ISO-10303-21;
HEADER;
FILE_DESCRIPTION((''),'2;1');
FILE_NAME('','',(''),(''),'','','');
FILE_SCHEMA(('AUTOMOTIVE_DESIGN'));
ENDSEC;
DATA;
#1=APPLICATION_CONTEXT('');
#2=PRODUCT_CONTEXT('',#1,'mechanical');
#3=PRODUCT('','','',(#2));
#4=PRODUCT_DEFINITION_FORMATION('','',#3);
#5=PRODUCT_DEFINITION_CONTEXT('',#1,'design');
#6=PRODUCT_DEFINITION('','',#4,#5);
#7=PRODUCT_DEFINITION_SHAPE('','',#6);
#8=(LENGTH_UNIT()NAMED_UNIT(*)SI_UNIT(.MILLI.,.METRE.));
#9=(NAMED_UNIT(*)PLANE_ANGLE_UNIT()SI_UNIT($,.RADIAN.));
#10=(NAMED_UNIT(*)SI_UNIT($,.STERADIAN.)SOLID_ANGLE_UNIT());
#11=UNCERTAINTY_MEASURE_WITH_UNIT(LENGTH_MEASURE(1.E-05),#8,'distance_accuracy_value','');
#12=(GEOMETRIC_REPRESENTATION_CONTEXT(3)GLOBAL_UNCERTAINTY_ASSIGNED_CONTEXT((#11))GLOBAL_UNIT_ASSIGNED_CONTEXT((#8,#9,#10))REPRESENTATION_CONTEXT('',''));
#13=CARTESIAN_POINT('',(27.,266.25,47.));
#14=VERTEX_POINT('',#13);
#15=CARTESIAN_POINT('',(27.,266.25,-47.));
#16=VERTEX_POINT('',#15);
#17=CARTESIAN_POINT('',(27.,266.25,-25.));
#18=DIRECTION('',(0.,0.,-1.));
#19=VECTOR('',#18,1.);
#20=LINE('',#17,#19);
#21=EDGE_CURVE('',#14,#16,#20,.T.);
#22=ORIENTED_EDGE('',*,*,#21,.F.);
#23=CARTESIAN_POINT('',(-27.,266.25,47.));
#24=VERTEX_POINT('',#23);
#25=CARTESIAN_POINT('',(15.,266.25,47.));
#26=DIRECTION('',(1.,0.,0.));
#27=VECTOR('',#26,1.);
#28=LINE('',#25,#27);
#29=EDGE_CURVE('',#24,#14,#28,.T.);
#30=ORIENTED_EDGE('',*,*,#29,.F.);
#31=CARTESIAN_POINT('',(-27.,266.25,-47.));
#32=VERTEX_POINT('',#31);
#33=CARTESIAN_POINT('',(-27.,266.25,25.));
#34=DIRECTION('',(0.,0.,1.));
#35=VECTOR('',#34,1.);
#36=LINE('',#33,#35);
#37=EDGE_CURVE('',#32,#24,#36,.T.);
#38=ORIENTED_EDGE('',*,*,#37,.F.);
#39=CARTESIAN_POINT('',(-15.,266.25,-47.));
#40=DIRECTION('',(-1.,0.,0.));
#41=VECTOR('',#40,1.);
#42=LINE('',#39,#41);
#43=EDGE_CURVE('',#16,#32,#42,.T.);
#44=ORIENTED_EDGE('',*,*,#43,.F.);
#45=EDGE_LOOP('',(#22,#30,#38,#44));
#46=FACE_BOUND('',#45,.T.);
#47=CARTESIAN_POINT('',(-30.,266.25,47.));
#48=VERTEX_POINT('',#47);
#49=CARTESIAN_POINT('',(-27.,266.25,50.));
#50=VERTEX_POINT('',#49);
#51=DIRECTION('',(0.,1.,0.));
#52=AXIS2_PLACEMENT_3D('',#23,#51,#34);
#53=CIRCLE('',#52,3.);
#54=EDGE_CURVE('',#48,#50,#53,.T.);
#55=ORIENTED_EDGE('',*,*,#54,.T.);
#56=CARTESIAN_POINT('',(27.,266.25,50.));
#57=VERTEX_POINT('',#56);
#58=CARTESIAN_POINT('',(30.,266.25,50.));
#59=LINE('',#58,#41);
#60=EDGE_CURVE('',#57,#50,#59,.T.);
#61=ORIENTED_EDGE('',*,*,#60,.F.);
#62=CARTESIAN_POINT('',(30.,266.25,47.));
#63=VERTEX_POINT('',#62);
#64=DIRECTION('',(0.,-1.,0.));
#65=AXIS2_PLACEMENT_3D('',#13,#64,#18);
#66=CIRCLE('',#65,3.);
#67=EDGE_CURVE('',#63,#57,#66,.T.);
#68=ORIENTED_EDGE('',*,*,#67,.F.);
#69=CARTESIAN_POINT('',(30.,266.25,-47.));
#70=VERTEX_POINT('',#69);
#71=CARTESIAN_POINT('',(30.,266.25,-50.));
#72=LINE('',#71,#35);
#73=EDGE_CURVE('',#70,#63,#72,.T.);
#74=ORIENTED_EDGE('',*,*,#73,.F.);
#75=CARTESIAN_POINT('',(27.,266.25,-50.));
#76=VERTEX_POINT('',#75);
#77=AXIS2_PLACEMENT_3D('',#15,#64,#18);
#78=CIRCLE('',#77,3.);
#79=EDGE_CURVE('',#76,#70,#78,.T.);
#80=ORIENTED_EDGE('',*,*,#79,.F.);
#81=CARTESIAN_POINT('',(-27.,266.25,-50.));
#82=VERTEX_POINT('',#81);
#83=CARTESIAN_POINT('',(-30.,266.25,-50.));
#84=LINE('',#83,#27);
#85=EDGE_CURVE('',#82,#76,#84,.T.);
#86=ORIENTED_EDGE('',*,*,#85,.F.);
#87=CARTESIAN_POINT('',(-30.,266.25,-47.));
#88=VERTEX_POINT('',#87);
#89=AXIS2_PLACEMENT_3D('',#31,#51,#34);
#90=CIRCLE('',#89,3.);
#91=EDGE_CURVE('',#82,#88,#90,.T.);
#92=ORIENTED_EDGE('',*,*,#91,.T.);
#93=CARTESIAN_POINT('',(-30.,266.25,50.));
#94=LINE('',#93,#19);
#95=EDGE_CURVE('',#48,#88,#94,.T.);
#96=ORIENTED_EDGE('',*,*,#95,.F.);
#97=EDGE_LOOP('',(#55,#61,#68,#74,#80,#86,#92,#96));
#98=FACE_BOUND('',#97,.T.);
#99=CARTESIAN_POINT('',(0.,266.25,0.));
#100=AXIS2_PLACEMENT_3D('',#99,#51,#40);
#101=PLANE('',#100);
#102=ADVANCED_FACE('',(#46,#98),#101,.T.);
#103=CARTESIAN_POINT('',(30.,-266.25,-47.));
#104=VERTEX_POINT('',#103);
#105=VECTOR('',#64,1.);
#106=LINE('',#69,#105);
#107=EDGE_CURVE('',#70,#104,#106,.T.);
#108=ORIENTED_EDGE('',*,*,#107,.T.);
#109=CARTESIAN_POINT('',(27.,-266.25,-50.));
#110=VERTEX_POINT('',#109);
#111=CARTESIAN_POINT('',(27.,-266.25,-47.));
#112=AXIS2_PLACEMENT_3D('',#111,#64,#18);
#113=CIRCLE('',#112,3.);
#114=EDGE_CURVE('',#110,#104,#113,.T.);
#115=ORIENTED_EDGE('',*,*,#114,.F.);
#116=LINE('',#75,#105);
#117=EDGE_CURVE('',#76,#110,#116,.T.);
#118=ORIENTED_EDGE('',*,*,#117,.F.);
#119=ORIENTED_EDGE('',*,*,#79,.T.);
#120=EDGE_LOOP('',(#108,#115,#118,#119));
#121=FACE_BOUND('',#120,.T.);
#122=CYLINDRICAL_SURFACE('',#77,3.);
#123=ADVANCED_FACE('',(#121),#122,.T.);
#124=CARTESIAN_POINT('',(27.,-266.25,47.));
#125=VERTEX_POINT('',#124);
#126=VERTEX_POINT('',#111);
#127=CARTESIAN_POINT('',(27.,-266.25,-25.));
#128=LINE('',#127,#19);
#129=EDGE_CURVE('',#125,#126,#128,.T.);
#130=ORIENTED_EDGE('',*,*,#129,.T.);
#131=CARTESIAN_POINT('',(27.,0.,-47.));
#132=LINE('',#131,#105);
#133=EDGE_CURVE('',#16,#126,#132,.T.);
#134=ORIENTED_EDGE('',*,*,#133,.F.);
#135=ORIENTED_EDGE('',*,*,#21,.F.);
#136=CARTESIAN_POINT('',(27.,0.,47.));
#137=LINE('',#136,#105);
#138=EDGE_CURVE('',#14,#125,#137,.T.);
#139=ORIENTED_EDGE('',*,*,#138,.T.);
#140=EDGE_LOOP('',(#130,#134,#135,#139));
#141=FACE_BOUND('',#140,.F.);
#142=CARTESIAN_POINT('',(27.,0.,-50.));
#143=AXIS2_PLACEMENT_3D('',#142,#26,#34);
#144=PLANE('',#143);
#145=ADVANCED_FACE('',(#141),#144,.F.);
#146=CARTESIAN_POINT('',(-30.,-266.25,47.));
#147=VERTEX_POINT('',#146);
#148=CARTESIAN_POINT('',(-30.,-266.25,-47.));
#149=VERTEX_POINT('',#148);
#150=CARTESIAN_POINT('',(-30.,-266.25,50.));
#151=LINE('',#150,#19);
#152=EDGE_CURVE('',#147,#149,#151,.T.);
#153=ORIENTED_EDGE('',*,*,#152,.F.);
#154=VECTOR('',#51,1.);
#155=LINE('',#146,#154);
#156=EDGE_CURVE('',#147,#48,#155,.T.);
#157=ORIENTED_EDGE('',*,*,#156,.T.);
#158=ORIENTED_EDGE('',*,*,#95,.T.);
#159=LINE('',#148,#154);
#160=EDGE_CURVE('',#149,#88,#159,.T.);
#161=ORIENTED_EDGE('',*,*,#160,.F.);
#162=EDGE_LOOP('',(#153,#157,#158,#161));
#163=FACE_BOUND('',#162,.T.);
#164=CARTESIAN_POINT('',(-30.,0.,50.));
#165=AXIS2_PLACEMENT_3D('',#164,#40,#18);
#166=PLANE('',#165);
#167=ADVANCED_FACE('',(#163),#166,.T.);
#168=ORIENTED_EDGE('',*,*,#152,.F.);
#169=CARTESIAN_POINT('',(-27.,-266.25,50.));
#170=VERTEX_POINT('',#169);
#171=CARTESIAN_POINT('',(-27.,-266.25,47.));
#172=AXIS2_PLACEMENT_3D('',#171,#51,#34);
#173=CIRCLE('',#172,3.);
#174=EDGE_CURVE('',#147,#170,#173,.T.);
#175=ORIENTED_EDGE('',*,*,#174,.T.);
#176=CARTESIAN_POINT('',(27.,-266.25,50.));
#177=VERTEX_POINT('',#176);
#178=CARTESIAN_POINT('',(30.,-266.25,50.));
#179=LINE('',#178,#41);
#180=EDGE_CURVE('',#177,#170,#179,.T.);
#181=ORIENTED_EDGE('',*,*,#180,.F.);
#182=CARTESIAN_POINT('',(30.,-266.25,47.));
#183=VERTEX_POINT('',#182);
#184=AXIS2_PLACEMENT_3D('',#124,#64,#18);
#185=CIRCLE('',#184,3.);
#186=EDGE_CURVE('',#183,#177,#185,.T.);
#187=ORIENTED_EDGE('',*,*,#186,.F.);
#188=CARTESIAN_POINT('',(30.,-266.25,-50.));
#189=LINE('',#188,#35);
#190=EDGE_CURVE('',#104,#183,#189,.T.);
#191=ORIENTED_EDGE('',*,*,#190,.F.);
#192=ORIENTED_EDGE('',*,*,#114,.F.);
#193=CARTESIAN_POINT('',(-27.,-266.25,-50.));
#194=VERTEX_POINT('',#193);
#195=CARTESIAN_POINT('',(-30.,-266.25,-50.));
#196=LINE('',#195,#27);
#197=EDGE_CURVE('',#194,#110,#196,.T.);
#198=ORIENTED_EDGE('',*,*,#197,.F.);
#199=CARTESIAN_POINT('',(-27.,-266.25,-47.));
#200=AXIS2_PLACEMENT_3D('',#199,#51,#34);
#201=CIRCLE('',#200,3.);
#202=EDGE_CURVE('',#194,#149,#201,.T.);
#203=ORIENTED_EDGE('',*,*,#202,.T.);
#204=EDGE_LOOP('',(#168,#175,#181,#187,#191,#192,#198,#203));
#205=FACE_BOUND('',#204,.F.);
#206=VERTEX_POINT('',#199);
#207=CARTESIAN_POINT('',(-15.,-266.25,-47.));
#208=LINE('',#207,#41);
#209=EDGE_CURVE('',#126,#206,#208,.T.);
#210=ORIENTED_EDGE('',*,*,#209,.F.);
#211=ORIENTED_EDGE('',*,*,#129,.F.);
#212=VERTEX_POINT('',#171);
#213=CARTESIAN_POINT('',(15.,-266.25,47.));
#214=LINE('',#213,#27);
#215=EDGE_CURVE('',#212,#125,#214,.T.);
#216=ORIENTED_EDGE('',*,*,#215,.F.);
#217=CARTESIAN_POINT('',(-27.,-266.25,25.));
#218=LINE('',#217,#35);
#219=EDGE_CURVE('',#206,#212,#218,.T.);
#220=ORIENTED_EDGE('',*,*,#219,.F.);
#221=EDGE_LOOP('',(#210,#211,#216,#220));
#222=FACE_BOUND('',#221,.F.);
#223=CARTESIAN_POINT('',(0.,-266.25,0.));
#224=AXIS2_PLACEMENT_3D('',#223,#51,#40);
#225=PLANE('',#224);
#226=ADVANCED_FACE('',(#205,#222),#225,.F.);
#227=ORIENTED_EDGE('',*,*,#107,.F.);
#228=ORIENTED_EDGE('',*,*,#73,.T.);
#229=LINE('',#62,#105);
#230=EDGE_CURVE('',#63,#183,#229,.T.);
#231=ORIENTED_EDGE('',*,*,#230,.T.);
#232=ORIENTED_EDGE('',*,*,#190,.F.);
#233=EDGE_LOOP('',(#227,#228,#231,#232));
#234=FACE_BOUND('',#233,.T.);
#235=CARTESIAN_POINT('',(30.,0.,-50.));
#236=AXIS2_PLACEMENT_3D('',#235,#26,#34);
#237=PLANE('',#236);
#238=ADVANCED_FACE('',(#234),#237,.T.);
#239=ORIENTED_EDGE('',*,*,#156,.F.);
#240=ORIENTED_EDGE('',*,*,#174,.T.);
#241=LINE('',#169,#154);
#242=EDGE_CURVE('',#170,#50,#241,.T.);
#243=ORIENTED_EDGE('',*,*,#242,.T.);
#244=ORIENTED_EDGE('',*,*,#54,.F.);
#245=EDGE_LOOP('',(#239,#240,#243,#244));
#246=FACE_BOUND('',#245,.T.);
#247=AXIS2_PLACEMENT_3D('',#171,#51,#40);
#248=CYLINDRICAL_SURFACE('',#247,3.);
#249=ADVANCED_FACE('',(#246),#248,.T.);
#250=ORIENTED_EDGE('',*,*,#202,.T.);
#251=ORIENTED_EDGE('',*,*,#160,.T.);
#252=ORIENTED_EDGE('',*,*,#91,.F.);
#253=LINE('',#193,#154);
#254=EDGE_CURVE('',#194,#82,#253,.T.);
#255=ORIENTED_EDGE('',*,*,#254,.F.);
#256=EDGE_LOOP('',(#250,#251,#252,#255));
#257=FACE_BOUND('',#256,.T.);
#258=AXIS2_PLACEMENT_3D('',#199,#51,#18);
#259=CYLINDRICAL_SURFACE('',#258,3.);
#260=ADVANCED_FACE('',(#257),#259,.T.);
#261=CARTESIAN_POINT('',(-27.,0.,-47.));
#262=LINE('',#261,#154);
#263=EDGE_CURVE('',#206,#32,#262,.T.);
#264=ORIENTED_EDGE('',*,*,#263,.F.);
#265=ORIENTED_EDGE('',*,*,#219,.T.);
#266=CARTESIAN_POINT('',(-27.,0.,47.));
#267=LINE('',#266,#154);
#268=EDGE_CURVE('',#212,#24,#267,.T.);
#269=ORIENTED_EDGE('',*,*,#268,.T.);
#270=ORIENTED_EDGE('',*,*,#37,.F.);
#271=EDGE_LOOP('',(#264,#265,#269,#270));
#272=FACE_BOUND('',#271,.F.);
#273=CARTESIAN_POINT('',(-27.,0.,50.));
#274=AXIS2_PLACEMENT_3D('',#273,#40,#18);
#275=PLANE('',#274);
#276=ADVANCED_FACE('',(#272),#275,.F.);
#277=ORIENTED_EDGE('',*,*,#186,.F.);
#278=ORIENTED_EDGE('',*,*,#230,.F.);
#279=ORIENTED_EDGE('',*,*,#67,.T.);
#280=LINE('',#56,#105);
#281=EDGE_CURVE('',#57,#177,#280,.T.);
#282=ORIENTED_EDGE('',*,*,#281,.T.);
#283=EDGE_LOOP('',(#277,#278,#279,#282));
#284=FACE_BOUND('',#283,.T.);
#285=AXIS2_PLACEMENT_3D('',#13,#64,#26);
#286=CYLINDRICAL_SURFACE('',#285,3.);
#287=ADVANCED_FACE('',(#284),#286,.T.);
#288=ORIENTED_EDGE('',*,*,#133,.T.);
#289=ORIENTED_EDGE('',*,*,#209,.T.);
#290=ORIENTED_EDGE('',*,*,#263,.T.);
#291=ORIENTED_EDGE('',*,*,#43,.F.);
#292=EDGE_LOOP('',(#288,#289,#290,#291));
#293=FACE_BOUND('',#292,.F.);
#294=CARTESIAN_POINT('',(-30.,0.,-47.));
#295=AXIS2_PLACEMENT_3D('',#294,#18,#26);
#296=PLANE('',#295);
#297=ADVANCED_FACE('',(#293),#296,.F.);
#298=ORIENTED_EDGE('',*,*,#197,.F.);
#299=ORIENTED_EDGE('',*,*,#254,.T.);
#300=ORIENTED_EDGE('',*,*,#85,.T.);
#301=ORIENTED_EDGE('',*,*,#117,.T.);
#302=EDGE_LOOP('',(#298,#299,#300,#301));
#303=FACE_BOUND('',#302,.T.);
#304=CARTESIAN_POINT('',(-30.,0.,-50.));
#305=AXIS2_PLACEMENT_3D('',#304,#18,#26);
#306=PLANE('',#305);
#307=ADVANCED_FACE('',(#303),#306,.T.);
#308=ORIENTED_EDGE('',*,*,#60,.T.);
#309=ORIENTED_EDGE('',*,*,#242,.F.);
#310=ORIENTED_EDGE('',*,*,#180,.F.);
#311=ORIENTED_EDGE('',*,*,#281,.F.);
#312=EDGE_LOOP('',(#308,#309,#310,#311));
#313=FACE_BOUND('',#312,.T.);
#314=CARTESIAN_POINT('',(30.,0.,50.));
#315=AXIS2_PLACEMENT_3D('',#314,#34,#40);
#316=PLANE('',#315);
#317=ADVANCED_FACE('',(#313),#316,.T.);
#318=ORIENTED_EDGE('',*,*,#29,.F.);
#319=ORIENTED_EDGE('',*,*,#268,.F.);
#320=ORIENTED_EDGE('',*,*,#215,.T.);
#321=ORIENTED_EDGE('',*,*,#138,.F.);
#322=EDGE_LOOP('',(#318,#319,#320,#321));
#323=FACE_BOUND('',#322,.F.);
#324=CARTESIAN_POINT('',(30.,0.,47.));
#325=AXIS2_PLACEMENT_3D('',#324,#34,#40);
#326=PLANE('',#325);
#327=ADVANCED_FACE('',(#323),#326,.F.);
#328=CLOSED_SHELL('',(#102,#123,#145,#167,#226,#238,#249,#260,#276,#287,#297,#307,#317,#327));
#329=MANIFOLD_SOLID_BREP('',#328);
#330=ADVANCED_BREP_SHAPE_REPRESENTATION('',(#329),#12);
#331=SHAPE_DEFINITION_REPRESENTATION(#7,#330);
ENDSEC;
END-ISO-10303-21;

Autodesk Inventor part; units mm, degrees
ref_plane "YZ Plane" through (0, 0, 0) normal (1, 0, 0) x (0, 1, 0)
ref_plane "XZ Plane" through (0, 0, 0) normal (0, 1, 0) x (-1, 0, 0)
ref_plane "XY Plane" through (0, 0, 0) normal (0, 0, 1) x (1, 0, 0)
sketch "Sketch1" plane through (0, 0, 0) normal (0, 1, 0) x (-1, 0, 0)
  line L0 (30, -50) -> (-30, -50)
  line L1 (-30, -50) -> (-30, 50)
  line L2 (-30, 50) -> (30, 50)
  line L3 (30, 50) -> (30, -50)
  line L4 (30, -50) -> (-30, 50) construction
  line L5 (-30, -50) -> (30, 50) construction
  point P0 (0, 0)
  dimension "d0" = 60
  dimension "d1" = 100
extrude "Extrusion1" add sketch "Sketch1" along normal mid plane 532.5
fillet "Fillet1" radius 3 4 edges at (-30, 0, 50) (30, 0, 50) (30, 0, -50) (-30, 0, -50)
shell "Shell1" thickness 3 removed faces 2 at (10, -266.25, 15.6667) at (10, 266.25, 15.6667)
properties part number "Perfil refuerzo"
